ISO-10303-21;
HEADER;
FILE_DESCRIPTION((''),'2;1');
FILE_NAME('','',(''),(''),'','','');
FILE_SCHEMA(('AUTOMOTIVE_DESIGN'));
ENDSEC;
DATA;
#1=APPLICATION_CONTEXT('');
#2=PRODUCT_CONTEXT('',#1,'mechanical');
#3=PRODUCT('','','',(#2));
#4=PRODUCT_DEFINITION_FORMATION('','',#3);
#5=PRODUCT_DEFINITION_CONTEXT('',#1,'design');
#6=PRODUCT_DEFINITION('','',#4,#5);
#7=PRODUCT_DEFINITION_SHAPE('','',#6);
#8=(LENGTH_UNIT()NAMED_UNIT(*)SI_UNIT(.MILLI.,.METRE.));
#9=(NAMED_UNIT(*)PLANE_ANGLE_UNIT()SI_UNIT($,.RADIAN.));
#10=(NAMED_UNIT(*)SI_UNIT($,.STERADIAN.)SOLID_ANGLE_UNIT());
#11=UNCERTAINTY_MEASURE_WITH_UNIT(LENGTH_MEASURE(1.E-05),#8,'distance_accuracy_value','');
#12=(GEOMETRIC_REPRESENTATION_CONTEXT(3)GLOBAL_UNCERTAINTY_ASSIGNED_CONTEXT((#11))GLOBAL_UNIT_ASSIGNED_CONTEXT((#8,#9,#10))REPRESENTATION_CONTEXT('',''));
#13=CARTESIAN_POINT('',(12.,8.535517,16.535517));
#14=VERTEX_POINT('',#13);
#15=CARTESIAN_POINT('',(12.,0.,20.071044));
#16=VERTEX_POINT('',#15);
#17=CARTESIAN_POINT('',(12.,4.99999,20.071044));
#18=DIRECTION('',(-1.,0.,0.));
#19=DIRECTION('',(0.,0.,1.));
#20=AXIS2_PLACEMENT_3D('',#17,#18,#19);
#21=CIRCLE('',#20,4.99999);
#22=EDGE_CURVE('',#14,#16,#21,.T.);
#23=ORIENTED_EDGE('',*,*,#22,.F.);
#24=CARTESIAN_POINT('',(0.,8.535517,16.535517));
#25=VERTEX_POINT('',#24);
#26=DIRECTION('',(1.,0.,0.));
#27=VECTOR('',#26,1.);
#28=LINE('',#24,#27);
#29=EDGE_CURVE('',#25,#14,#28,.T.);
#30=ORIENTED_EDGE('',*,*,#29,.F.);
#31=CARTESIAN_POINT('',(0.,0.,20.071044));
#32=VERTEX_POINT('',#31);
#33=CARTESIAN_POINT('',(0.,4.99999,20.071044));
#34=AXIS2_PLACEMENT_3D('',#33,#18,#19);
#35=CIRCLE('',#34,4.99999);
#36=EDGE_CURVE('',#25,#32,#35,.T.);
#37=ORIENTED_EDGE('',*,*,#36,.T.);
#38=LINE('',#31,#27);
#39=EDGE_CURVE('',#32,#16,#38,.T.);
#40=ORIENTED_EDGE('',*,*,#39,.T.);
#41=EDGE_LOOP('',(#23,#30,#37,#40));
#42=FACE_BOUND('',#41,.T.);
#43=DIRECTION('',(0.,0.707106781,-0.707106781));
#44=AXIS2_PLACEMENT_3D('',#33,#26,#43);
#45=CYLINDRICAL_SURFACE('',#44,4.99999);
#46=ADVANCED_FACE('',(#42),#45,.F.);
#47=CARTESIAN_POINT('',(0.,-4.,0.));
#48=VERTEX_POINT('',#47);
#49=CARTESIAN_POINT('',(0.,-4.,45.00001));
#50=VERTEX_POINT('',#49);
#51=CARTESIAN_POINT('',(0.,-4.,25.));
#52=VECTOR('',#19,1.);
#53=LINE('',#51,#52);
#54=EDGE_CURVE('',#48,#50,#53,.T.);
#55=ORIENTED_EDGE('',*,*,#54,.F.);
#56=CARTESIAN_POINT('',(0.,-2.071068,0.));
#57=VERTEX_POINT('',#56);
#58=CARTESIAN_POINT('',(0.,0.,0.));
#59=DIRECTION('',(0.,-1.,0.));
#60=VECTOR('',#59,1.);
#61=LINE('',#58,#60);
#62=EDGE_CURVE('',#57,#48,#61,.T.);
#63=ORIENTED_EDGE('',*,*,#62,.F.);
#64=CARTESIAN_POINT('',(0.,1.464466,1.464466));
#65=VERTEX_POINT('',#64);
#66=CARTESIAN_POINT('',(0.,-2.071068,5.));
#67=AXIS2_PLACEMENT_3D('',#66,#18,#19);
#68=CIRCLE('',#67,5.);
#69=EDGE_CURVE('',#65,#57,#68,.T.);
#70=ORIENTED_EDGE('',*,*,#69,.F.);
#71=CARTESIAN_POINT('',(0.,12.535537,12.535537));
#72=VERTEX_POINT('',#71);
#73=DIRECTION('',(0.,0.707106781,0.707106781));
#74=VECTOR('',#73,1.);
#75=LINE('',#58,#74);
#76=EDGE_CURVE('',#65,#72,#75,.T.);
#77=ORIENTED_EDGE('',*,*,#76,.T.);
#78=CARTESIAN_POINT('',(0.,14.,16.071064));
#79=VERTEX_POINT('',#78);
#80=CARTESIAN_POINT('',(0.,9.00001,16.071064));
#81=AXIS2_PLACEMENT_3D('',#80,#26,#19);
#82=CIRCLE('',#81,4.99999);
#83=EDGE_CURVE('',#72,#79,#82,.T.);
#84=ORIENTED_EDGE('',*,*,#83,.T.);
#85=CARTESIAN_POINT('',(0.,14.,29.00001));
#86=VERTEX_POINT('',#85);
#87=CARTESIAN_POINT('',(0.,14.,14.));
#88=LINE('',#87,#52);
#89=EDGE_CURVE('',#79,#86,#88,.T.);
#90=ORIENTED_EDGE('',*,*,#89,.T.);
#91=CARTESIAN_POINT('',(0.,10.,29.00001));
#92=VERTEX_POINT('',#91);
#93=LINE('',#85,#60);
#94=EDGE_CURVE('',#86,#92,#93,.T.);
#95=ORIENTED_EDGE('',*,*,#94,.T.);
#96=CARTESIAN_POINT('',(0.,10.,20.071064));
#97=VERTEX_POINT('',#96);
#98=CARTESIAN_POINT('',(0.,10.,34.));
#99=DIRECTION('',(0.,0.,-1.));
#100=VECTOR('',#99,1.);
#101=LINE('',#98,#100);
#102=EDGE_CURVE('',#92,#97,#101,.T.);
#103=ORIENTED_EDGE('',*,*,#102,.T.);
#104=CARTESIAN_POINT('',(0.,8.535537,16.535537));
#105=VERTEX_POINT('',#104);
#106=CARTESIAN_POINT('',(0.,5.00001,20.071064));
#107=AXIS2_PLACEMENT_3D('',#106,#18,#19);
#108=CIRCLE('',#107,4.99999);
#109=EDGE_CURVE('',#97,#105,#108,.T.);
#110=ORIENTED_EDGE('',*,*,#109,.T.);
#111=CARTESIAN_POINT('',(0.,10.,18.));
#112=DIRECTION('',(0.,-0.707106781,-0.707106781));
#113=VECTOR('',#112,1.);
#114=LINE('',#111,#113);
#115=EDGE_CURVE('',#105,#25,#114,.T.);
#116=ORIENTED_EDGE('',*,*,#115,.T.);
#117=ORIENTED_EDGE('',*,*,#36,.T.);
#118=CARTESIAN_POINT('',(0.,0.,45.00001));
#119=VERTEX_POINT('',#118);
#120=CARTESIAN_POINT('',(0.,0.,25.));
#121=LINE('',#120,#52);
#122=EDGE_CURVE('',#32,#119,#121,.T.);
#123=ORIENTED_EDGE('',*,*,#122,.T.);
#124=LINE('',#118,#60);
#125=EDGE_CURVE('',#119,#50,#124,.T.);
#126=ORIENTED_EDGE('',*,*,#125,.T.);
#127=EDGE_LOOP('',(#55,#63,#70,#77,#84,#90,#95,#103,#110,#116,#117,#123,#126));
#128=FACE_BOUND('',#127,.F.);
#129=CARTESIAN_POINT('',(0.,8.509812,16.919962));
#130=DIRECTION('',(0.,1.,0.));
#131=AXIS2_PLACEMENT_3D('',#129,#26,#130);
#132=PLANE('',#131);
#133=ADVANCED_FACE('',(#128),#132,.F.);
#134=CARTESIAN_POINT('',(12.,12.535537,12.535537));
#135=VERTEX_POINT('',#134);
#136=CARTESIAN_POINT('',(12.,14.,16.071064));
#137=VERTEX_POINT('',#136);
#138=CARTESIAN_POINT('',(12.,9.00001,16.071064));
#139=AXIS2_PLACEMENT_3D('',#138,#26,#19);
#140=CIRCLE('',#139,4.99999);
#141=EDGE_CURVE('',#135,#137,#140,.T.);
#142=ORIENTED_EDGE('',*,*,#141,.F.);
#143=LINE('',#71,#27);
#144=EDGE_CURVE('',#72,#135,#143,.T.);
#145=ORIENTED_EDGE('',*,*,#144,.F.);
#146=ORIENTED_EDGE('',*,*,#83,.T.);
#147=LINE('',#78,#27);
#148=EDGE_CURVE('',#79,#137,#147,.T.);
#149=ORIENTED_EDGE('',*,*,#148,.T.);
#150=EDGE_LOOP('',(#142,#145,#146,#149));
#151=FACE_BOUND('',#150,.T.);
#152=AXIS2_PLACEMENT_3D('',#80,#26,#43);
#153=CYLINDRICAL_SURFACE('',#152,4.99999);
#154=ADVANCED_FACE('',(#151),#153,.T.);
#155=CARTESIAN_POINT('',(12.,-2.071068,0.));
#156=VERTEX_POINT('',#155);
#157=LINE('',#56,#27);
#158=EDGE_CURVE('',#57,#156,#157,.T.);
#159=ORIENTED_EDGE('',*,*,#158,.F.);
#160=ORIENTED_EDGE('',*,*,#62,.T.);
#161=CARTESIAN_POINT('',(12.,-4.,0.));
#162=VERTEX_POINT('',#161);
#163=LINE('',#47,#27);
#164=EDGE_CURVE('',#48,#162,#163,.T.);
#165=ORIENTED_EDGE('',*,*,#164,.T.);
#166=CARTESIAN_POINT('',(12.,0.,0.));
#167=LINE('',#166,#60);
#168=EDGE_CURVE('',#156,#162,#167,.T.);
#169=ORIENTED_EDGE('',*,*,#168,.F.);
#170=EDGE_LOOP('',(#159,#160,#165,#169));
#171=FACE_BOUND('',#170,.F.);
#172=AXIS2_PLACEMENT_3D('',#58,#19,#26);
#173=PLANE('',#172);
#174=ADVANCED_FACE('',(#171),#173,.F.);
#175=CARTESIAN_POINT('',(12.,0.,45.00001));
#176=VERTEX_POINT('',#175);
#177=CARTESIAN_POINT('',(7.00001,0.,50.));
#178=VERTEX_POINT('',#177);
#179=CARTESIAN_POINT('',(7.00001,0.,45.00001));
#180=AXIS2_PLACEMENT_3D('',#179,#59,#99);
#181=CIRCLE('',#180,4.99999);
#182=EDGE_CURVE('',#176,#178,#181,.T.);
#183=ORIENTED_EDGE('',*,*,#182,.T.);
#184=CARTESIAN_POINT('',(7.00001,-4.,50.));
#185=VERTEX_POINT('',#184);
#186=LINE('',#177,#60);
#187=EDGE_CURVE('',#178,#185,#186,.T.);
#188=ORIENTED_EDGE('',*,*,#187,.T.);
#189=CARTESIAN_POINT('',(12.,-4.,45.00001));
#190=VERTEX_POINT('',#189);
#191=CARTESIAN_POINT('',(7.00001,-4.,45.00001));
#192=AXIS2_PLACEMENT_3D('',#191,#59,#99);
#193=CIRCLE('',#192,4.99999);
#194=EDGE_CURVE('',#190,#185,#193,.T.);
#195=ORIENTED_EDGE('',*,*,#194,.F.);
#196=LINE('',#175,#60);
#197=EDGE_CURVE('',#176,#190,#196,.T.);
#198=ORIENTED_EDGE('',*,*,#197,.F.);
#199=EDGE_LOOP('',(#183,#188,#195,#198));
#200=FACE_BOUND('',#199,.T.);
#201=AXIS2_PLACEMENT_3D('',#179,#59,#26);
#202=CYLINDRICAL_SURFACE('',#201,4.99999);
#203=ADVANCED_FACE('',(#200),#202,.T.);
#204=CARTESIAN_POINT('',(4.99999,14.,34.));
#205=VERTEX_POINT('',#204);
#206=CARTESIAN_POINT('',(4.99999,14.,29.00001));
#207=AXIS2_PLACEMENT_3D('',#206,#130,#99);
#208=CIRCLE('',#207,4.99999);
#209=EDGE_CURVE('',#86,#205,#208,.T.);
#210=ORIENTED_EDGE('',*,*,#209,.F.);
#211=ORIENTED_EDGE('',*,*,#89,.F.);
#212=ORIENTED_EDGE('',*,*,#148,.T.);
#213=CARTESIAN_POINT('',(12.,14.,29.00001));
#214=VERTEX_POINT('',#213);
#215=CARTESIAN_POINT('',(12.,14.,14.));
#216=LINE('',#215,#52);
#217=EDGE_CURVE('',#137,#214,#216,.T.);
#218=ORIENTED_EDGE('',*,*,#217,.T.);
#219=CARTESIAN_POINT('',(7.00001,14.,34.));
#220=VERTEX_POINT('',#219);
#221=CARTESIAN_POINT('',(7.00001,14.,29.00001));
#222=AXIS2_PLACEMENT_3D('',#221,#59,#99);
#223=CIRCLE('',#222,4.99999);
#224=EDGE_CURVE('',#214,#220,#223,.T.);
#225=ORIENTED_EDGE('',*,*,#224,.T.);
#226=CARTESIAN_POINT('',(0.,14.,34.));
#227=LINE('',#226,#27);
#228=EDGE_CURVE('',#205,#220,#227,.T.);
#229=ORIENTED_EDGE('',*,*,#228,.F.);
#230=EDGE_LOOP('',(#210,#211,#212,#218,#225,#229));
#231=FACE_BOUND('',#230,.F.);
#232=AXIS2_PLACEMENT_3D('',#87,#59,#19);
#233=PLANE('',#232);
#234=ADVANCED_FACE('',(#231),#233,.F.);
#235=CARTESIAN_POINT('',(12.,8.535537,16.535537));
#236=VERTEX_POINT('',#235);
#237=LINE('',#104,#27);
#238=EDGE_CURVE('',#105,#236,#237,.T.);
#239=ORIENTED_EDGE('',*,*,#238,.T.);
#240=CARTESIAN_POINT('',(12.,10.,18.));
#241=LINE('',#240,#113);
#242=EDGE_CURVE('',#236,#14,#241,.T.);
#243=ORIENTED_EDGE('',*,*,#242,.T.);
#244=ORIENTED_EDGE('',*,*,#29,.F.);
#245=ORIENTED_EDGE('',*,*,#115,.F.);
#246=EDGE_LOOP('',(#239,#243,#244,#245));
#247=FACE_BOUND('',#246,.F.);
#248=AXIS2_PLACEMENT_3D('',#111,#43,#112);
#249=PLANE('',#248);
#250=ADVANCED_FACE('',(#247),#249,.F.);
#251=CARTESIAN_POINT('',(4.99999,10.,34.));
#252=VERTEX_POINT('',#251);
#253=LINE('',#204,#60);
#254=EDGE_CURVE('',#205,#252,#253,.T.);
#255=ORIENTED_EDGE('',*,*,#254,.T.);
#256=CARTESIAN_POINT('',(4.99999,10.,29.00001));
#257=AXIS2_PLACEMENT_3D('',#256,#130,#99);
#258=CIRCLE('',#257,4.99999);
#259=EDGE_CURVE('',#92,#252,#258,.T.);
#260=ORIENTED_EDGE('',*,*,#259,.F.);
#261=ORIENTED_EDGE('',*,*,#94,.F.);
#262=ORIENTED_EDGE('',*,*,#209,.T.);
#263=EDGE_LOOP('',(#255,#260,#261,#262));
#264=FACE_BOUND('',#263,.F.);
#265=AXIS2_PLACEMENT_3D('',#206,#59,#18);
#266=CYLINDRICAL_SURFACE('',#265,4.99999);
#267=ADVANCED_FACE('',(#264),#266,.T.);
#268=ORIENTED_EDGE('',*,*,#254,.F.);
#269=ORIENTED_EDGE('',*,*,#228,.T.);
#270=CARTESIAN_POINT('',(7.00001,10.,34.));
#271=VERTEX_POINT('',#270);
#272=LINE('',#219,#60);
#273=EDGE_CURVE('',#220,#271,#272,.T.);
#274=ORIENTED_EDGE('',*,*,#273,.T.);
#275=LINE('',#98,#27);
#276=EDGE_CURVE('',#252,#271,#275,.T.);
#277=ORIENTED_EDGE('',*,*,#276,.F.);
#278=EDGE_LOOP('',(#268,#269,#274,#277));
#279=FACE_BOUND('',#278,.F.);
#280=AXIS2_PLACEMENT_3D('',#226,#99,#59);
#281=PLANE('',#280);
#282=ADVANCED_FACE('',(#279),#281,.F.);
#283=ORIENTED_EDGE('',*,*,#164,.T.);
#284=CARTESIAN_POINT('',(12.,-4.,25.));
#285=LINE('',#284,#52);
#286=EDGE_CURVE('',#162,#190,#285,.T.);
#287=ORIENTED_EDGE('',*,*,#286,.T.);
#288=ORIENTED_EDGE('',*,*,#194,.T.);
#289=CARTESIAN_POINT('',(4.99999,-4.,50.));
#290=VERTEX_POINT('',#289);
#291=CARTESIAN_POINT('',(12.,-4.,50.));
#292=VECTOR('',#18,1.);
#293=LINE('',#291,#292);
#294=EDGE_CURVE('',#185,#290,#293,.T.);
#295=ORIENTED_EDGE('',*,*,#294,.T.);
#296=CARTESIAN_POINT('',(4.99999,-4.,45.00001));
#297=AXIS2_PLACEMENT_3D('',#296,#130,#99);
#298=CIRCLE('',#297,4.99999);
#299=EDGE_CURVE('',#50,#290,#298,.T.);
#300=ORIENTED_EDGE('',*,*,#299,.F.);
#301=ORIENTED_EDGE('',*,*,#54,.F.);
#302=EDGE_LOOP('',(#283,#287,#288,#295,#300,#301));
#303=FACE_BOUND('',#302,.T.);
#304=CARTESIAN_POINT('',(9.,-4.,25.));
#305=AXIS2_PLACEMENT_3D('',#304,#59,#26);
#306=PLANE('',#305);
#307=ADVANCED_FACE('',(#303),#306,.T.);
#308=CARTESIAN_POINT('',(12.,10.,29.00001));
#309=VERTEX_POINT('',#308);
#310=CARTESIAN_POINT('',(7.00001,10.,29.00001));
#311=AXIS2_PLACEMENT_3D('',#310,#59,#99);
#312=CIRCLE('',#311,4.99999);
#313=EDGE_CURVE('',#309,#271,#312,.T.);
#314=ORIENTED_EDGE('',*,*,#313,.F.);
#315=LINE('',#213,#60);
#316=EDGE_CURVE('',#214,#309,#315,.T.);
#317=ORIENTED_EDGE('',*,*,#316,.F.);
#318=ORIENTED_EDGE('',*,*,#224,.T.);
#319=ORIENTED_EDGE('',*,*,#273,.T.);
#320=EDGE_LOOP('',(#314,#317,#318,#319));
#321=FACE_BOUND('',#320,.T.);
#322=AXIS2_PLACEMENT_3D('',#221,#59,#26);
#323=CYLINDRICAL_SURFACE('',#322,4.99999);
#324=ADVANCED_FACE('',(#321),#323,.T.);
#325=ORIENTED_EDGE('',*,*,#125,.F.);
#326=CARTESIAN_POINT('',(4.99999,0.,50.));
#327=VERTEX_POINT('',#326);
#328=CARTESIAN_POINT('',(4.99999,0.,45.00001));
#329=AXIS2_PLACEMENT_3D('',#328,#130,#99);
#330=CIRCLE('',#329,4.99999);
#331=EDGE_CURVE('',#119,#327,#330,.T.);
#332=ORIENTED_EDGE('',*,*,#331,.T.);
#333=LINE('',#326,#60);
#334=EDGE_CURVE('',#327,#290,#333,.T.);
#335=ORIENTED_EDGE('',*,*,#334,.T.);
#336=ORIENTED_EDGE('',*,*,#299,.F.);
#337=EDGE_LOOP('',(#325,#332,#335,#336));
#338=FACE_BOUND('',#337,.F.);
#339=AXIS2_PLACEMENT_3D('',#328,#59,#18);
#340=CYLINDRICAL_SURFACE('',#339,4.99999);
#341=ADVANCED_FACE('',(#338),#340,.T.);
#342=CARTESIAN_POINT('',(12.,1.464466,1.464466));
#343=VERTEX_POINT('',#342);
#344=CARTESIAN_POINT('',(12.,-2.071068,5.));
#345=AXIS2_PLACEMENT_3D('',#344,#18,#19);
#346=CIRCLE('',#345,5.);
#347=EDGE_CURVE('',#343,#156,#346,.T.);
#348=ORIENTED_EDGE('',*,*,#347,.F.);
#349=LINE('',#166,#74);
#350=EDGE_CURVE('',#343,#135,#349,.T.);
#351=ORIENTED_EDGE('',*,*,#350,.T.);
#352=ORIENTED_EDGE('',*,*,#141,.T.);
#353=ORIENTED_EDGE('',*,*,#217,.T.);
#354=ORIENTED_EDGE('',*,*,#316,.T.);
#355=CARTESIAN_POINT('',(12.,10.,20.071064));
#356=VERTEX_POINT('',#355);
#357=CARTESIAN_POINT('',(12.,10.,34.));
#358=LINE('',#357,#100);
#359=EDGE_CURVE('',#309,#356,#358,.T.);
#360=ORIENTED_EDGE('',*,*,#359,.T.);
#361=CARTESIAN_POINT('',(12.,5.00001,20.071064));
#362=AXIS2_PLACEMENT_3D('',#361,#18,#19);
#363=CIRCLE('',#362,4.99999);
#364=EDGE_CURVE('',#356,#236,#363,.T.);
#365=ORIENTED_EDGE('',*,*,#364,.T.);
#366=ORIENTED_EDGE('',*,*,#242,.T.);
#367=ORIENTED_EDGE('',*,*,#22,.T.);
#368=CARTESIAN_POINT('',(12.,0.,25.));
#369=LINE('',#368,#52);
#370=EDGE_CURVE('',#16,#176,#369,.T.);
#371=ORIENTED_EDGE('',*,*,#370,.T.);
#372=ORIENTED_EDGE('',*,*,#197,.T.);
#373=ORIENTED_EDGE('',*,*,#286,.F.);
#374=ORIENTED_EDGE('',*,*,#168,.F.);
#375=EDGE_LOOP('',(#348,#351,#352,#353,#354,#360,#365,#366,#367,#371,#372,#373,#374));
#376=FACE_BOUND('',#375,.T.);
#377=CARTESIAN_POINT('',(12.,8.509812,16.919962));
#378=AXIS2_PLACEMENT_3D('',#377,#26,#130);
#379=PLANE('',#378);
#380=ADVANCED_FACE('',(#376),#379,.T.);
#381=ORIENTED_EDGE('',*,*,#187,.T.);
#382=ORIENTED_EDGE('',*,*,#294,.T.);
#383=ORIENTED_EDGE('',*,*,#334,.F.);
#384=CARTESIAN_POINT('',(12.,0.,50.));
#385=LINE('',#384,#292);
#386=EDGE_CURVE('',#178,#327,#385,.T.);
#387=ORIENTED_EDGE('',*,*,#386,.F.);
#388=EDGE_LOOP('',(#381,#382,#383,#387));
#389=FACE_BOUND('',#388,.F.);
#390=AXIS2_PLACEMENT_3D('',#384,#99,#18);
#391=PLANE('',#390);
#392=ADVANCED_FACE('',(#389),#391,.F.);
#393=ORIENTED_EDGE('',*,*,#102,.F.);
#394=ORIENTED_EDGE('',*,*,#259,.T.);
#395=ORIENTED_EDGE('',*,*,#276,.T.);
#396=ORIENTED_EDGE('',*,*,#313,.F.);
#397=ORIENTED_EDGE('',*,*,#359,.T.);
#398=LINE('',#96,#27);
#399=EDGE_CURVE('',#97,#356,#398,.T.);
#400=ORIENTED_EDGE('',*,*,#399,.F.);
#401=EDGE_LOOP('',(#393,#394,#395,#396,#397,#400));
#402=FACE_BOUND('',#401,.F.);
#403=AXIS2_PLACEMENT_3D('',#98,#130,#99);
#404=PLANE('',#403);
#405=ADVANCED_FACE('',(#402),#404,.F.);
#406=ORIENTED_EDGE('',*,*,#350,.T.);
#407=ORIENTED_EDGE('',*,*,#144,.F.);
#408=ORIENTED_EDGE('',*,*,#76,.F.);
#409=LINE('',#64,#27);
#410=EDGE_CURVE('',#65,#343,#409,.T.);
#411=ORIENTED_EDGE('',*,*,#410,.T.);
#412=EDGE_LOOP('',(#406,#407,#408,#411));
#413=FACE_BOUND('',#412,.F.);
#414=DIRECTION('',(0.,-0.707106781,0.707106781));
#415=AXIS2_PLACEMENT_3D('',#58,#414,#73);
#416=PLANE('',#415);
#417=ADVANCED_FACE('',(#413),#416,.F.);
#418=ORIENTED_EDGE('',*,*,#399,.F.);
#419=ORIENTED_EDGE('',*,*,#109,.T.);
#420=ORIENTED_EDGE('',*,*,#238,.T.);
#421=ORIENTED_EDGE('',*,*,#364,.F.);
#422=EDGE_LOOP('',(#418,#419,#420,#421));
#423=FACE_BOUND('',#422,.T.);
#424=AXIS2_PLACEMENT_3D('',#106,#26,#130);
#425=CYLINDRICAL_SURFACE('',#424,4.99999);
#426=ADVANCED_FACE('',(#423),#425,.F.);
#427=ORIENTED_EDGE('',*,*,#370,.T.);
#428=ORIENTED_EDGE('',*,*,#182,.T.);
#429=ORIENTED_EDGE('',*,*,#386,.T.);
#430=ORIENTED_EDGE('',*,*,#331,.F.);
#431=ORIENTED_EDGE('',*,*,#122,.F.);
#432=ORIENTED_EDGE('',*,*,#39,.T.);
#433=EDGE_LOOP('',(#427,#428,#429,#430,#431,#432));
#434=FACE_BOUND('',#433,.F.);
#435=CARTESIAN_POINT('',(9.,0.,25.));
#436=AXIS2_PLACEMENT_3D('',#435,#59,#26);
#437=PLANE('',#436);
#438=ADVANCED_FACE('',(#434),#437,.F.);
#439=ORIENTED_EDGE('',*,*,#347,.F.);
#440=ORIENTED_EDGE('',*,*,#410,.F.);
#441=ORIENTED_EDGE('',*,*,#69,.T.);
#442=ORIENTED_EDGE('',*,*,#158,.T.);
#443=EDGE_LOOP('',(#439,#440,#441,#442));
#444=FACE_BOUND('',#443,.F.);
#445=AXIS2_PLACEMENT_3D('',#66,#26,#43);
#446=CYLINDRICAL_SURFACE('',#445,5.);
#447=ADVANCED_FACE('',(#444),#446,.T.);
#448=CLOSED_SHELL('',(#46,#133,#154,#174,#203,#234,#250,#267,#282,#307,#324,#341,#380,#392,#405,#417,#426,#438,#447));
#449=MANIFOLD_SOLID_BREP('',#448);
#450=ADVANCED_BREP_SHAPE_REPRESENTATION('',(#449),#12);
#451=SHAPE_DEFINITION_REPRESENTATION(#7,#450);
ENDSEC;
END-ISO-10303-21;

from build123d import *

# Parameters (mm, degrees)
F0_W     = 6
F0_H     = 50
F1_DEPTH = 4
F3_DEPTH = 12
F4_R     = 4.99999
F5_R     = 5


# Not quite as in the source:
# - a fillet or chamfer is up to 0.001 mm smaller than in the source, because OpenCascade refuses the exact size


with BuildPart() as f1:
    # F0 (on Front) → F1 (new body)
    with BuildSketch(Plane.XZ):
        with Locations((9, 25)):
            Rectangle(F0_W, F0_H)
        with Locations((3, 25)):
            Rectangle(F0_W, F0_H)
    extrude(amount=F1_DEPTH)

    # F2 (on Right) → F3 (join)
    with BuildSketch(Plane.YZ):
        Polygon((0, 8), (0, 0), (14, 14), (14, 34), (10, 34), (10, 18), align=None)
    extrude(amount=F3_DEPTH)

    # F4 (radius 5 in the source; OpenCascade refuses exactly that, so slightly less here)
    f4_edges = [f1.edges().sort_by_distance(p)[0] for p in [
        (0, -2, 50),
        (12, -2, 50),
        (0, 12, 34),
        (12, 12, 34),
        (6, 10, 18),
        (6, 14, 14),
        (6, 0, 8),
    ]]
    fillet(f4_edges, radius=F4_R)

    # F5
    f5_edges = [f1.edges().sort_by_distance(p)[0] for p in [
        (6, 0, 0),
    ]]
    fillet(f5_edges, radius=F5_R)


solid = f1.part
